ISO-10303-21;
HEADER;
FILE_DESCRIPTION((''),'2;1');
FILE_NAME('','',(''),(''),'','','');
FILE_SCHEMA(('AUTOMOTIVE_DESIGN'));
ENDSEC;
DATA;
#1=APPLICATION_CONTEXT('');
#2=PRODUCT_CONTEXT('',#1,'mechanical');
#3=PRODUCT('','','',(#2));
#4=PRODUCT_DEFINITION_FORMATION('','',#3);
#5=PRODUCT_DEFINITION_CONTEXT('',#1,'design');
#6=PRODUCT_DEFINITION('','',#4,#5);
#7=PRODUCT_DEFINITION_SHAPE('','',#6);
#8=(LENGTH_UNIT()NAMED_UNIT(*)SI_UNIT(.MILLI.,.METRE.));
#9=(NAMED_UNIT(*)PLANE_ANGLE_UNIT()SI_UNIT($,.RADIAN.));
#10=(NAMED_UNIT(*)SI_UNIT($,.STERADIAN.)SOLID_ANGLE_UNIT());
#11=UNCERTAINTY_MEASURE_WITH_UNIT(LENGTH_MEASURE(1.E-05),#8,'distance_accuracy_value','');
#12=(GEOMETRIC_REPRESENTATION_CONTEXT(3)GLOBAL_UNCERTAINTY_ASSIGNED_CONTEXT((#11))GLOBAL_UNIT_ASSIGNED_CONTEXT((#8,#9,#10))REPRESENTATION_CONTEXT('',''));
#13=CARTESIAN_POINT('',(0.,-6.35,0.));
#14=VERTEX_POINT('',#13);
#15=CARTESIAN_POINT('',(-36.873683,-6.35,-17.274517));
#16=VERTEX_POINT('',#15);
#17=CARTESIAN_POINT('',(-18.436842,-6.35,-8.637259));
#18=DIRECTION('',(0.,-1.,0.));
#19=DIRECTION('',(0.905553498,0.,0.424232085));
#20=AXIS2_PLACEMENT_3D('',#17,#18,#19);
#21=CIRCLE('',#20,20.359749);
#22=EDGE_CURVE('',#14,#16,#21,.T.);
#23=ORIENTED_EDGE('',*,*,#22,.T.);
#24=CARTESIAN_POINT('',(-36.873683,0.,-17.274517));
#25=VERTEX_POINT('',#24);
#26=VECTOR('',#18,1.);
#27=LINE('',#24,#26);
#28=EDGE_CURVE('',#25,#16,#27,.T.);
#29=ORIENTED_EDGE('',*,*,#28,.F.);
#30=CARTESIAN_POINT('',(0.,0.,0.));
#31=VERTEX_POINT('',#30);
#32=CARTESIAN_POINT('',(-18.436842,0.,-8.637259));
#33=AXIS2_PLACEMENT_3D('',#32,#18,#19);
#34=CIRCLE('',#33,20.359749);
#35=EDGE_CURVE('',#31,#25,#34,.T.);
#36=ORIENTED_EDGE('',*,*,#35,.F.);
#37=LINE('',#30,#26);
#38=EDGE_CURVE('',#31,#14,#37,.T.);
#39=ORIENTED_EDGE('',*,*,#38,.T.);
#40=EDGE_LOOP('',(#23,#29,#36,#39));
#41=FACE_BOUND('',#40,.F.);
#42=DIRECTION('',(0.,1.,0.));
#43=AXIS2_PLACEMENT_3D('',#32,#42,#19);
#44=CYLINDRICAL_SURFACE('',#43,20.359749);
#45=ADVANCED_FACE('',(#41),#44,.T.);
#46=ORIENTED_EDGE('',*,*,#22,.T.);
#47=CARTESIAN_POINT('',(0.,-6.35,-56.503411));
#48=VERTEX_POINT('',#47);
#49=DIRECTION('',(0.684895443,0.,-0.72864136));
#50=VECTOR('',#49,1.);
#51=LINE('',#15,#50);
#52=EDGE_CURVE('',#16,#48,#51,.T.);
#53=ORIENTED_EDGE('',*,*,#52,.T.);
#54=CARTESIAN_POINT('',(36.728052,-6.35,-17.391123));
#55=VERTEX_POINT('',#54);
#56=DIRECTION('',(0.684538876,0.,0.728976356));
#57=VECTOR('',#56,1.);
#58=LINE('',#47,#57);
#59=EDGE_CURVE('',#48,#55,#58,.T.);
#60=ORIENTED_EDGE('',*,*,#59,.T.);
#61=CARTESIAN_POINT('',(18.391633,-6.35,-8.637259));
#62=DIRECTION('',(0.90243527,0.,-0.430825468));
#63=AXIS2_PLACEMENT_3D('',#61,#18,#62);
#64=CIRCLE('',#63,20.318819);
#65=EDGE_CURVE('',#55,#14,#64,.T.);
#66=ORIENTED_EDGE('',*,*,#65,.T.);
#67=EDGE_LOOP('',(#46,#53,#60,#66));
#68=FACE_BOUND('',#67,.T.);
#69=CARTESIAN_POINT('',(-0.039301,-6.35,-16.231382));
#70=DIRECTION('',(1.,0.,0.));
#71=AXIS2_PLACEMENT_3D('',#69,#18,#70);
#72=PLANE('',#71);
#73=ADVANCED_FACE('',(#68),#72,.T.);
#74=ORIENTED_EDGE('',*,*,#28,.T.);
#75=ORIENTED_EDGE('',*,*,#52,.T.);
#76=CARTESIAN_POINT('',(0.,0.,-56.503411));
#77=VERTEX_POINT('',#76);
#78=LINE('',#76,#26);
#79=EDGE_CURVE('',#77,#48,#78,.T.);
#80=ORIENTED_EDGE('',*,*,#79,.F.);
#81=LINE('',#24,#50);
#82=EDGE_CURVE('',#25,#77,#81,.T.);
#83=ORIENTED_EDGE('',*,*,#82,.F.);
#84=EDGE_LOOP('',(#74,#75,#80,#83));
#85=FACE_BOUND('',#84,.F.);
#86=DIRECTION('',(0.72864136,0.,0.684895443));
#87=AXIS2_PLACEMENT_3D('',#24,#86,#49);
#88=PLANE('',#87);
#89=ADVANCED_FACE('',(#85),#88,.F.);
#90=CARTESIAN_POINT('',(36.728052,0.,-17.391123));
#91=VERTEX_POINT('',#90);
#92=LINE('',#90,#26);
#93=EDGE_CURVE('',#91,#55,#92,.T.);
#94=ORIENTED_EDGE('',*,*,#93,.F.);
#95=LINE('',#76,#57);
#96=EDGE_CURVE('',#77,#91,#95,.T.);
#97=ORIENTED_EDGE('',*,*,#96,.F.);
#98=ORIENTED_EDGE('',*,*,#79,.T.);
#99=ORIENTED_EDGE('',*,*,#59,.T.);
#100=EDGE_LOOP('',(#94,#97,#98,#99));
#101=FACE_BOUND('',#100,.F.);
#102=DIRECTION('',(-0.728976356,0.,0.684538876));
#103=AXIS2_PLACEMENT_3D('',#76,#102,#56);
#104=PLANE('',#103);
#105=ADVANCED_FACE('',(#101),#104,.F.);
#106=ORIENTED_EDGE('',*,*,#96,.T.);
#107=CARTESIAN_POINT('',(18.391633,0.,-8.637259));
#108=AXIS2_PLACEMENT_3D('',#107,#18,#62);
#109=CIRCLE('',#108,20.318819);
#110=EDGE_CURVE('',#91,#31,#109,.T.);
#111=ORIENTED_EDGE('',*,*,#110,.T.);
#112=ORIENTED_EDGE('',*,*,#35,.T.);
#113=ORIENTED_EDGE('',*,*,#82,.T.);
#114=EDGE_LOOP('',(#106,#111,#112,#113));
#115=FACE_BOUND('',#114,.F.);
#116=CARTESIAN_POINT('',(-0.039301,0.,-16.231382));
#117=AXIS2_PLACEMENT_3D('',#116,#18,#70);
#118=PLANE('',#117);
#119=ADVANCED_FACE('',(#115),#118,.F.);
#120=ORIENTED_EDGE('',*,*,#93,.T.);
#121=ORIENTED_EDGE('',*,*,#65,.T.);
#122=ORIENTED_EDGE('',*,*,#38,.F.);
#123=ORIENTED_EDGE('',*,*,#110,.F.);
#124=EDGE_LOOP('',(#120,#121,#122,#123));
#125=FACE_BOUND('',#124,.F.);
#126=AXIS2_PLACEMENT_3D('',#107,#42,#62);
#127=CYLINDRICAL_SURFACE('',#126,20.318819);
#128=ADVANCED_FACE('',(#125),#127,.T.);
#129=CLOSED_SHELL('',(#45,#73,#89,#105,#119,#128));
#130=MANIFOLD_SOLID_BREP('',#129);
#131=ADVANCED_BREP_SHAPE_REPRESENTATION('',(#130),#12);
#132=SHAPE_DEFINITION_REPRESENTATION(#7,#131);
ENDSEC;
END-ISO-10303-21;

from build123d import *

# Parameters (mm, degrees)
F1_DEPTH = 6.35


with BuildPart() as f1:
    # F0 (on Front) → F1 (new body)
    with BuildSketch(Plane.XZ):
        with BuildLine():
            Line((0, -56.5034113824), (36.7280521826, -17.3911233933))
            ThreePointArc((36.7280521826, -17.3911233933), (27.0872387233, 9.7268599894), (0, 0))
            ThreePointArc((0, 0), (-27.0741003345, 9.7995830277), (-36.8736833622, -17.2745173068))
            Line((-36.8736833622, -17.2745173068), (0, -56.5034113824))
        make_face()
        with BuildLine():
            ThreePointArc((0, -17.2745173068), (-1.9271858798, -8.6372586534), (0, 0))
            ThreePointArc((0, 0), (1.9229070457, -8.6372586534), (0, -17.2745173068))
        make_face(mode=Mode.SUBTRACT)
        with BuildLine():
            ThreePointArc((0, -17.2745173068), (1.9229070457, -8.6372586534), (0, 0))
            ThreePointArc((0, 0), (-1.9271858798, -8.6372586534), (0, -17.2745173068))
        make_face()
    extrude(amount=F1_DEPTH)


solid = f1.part
